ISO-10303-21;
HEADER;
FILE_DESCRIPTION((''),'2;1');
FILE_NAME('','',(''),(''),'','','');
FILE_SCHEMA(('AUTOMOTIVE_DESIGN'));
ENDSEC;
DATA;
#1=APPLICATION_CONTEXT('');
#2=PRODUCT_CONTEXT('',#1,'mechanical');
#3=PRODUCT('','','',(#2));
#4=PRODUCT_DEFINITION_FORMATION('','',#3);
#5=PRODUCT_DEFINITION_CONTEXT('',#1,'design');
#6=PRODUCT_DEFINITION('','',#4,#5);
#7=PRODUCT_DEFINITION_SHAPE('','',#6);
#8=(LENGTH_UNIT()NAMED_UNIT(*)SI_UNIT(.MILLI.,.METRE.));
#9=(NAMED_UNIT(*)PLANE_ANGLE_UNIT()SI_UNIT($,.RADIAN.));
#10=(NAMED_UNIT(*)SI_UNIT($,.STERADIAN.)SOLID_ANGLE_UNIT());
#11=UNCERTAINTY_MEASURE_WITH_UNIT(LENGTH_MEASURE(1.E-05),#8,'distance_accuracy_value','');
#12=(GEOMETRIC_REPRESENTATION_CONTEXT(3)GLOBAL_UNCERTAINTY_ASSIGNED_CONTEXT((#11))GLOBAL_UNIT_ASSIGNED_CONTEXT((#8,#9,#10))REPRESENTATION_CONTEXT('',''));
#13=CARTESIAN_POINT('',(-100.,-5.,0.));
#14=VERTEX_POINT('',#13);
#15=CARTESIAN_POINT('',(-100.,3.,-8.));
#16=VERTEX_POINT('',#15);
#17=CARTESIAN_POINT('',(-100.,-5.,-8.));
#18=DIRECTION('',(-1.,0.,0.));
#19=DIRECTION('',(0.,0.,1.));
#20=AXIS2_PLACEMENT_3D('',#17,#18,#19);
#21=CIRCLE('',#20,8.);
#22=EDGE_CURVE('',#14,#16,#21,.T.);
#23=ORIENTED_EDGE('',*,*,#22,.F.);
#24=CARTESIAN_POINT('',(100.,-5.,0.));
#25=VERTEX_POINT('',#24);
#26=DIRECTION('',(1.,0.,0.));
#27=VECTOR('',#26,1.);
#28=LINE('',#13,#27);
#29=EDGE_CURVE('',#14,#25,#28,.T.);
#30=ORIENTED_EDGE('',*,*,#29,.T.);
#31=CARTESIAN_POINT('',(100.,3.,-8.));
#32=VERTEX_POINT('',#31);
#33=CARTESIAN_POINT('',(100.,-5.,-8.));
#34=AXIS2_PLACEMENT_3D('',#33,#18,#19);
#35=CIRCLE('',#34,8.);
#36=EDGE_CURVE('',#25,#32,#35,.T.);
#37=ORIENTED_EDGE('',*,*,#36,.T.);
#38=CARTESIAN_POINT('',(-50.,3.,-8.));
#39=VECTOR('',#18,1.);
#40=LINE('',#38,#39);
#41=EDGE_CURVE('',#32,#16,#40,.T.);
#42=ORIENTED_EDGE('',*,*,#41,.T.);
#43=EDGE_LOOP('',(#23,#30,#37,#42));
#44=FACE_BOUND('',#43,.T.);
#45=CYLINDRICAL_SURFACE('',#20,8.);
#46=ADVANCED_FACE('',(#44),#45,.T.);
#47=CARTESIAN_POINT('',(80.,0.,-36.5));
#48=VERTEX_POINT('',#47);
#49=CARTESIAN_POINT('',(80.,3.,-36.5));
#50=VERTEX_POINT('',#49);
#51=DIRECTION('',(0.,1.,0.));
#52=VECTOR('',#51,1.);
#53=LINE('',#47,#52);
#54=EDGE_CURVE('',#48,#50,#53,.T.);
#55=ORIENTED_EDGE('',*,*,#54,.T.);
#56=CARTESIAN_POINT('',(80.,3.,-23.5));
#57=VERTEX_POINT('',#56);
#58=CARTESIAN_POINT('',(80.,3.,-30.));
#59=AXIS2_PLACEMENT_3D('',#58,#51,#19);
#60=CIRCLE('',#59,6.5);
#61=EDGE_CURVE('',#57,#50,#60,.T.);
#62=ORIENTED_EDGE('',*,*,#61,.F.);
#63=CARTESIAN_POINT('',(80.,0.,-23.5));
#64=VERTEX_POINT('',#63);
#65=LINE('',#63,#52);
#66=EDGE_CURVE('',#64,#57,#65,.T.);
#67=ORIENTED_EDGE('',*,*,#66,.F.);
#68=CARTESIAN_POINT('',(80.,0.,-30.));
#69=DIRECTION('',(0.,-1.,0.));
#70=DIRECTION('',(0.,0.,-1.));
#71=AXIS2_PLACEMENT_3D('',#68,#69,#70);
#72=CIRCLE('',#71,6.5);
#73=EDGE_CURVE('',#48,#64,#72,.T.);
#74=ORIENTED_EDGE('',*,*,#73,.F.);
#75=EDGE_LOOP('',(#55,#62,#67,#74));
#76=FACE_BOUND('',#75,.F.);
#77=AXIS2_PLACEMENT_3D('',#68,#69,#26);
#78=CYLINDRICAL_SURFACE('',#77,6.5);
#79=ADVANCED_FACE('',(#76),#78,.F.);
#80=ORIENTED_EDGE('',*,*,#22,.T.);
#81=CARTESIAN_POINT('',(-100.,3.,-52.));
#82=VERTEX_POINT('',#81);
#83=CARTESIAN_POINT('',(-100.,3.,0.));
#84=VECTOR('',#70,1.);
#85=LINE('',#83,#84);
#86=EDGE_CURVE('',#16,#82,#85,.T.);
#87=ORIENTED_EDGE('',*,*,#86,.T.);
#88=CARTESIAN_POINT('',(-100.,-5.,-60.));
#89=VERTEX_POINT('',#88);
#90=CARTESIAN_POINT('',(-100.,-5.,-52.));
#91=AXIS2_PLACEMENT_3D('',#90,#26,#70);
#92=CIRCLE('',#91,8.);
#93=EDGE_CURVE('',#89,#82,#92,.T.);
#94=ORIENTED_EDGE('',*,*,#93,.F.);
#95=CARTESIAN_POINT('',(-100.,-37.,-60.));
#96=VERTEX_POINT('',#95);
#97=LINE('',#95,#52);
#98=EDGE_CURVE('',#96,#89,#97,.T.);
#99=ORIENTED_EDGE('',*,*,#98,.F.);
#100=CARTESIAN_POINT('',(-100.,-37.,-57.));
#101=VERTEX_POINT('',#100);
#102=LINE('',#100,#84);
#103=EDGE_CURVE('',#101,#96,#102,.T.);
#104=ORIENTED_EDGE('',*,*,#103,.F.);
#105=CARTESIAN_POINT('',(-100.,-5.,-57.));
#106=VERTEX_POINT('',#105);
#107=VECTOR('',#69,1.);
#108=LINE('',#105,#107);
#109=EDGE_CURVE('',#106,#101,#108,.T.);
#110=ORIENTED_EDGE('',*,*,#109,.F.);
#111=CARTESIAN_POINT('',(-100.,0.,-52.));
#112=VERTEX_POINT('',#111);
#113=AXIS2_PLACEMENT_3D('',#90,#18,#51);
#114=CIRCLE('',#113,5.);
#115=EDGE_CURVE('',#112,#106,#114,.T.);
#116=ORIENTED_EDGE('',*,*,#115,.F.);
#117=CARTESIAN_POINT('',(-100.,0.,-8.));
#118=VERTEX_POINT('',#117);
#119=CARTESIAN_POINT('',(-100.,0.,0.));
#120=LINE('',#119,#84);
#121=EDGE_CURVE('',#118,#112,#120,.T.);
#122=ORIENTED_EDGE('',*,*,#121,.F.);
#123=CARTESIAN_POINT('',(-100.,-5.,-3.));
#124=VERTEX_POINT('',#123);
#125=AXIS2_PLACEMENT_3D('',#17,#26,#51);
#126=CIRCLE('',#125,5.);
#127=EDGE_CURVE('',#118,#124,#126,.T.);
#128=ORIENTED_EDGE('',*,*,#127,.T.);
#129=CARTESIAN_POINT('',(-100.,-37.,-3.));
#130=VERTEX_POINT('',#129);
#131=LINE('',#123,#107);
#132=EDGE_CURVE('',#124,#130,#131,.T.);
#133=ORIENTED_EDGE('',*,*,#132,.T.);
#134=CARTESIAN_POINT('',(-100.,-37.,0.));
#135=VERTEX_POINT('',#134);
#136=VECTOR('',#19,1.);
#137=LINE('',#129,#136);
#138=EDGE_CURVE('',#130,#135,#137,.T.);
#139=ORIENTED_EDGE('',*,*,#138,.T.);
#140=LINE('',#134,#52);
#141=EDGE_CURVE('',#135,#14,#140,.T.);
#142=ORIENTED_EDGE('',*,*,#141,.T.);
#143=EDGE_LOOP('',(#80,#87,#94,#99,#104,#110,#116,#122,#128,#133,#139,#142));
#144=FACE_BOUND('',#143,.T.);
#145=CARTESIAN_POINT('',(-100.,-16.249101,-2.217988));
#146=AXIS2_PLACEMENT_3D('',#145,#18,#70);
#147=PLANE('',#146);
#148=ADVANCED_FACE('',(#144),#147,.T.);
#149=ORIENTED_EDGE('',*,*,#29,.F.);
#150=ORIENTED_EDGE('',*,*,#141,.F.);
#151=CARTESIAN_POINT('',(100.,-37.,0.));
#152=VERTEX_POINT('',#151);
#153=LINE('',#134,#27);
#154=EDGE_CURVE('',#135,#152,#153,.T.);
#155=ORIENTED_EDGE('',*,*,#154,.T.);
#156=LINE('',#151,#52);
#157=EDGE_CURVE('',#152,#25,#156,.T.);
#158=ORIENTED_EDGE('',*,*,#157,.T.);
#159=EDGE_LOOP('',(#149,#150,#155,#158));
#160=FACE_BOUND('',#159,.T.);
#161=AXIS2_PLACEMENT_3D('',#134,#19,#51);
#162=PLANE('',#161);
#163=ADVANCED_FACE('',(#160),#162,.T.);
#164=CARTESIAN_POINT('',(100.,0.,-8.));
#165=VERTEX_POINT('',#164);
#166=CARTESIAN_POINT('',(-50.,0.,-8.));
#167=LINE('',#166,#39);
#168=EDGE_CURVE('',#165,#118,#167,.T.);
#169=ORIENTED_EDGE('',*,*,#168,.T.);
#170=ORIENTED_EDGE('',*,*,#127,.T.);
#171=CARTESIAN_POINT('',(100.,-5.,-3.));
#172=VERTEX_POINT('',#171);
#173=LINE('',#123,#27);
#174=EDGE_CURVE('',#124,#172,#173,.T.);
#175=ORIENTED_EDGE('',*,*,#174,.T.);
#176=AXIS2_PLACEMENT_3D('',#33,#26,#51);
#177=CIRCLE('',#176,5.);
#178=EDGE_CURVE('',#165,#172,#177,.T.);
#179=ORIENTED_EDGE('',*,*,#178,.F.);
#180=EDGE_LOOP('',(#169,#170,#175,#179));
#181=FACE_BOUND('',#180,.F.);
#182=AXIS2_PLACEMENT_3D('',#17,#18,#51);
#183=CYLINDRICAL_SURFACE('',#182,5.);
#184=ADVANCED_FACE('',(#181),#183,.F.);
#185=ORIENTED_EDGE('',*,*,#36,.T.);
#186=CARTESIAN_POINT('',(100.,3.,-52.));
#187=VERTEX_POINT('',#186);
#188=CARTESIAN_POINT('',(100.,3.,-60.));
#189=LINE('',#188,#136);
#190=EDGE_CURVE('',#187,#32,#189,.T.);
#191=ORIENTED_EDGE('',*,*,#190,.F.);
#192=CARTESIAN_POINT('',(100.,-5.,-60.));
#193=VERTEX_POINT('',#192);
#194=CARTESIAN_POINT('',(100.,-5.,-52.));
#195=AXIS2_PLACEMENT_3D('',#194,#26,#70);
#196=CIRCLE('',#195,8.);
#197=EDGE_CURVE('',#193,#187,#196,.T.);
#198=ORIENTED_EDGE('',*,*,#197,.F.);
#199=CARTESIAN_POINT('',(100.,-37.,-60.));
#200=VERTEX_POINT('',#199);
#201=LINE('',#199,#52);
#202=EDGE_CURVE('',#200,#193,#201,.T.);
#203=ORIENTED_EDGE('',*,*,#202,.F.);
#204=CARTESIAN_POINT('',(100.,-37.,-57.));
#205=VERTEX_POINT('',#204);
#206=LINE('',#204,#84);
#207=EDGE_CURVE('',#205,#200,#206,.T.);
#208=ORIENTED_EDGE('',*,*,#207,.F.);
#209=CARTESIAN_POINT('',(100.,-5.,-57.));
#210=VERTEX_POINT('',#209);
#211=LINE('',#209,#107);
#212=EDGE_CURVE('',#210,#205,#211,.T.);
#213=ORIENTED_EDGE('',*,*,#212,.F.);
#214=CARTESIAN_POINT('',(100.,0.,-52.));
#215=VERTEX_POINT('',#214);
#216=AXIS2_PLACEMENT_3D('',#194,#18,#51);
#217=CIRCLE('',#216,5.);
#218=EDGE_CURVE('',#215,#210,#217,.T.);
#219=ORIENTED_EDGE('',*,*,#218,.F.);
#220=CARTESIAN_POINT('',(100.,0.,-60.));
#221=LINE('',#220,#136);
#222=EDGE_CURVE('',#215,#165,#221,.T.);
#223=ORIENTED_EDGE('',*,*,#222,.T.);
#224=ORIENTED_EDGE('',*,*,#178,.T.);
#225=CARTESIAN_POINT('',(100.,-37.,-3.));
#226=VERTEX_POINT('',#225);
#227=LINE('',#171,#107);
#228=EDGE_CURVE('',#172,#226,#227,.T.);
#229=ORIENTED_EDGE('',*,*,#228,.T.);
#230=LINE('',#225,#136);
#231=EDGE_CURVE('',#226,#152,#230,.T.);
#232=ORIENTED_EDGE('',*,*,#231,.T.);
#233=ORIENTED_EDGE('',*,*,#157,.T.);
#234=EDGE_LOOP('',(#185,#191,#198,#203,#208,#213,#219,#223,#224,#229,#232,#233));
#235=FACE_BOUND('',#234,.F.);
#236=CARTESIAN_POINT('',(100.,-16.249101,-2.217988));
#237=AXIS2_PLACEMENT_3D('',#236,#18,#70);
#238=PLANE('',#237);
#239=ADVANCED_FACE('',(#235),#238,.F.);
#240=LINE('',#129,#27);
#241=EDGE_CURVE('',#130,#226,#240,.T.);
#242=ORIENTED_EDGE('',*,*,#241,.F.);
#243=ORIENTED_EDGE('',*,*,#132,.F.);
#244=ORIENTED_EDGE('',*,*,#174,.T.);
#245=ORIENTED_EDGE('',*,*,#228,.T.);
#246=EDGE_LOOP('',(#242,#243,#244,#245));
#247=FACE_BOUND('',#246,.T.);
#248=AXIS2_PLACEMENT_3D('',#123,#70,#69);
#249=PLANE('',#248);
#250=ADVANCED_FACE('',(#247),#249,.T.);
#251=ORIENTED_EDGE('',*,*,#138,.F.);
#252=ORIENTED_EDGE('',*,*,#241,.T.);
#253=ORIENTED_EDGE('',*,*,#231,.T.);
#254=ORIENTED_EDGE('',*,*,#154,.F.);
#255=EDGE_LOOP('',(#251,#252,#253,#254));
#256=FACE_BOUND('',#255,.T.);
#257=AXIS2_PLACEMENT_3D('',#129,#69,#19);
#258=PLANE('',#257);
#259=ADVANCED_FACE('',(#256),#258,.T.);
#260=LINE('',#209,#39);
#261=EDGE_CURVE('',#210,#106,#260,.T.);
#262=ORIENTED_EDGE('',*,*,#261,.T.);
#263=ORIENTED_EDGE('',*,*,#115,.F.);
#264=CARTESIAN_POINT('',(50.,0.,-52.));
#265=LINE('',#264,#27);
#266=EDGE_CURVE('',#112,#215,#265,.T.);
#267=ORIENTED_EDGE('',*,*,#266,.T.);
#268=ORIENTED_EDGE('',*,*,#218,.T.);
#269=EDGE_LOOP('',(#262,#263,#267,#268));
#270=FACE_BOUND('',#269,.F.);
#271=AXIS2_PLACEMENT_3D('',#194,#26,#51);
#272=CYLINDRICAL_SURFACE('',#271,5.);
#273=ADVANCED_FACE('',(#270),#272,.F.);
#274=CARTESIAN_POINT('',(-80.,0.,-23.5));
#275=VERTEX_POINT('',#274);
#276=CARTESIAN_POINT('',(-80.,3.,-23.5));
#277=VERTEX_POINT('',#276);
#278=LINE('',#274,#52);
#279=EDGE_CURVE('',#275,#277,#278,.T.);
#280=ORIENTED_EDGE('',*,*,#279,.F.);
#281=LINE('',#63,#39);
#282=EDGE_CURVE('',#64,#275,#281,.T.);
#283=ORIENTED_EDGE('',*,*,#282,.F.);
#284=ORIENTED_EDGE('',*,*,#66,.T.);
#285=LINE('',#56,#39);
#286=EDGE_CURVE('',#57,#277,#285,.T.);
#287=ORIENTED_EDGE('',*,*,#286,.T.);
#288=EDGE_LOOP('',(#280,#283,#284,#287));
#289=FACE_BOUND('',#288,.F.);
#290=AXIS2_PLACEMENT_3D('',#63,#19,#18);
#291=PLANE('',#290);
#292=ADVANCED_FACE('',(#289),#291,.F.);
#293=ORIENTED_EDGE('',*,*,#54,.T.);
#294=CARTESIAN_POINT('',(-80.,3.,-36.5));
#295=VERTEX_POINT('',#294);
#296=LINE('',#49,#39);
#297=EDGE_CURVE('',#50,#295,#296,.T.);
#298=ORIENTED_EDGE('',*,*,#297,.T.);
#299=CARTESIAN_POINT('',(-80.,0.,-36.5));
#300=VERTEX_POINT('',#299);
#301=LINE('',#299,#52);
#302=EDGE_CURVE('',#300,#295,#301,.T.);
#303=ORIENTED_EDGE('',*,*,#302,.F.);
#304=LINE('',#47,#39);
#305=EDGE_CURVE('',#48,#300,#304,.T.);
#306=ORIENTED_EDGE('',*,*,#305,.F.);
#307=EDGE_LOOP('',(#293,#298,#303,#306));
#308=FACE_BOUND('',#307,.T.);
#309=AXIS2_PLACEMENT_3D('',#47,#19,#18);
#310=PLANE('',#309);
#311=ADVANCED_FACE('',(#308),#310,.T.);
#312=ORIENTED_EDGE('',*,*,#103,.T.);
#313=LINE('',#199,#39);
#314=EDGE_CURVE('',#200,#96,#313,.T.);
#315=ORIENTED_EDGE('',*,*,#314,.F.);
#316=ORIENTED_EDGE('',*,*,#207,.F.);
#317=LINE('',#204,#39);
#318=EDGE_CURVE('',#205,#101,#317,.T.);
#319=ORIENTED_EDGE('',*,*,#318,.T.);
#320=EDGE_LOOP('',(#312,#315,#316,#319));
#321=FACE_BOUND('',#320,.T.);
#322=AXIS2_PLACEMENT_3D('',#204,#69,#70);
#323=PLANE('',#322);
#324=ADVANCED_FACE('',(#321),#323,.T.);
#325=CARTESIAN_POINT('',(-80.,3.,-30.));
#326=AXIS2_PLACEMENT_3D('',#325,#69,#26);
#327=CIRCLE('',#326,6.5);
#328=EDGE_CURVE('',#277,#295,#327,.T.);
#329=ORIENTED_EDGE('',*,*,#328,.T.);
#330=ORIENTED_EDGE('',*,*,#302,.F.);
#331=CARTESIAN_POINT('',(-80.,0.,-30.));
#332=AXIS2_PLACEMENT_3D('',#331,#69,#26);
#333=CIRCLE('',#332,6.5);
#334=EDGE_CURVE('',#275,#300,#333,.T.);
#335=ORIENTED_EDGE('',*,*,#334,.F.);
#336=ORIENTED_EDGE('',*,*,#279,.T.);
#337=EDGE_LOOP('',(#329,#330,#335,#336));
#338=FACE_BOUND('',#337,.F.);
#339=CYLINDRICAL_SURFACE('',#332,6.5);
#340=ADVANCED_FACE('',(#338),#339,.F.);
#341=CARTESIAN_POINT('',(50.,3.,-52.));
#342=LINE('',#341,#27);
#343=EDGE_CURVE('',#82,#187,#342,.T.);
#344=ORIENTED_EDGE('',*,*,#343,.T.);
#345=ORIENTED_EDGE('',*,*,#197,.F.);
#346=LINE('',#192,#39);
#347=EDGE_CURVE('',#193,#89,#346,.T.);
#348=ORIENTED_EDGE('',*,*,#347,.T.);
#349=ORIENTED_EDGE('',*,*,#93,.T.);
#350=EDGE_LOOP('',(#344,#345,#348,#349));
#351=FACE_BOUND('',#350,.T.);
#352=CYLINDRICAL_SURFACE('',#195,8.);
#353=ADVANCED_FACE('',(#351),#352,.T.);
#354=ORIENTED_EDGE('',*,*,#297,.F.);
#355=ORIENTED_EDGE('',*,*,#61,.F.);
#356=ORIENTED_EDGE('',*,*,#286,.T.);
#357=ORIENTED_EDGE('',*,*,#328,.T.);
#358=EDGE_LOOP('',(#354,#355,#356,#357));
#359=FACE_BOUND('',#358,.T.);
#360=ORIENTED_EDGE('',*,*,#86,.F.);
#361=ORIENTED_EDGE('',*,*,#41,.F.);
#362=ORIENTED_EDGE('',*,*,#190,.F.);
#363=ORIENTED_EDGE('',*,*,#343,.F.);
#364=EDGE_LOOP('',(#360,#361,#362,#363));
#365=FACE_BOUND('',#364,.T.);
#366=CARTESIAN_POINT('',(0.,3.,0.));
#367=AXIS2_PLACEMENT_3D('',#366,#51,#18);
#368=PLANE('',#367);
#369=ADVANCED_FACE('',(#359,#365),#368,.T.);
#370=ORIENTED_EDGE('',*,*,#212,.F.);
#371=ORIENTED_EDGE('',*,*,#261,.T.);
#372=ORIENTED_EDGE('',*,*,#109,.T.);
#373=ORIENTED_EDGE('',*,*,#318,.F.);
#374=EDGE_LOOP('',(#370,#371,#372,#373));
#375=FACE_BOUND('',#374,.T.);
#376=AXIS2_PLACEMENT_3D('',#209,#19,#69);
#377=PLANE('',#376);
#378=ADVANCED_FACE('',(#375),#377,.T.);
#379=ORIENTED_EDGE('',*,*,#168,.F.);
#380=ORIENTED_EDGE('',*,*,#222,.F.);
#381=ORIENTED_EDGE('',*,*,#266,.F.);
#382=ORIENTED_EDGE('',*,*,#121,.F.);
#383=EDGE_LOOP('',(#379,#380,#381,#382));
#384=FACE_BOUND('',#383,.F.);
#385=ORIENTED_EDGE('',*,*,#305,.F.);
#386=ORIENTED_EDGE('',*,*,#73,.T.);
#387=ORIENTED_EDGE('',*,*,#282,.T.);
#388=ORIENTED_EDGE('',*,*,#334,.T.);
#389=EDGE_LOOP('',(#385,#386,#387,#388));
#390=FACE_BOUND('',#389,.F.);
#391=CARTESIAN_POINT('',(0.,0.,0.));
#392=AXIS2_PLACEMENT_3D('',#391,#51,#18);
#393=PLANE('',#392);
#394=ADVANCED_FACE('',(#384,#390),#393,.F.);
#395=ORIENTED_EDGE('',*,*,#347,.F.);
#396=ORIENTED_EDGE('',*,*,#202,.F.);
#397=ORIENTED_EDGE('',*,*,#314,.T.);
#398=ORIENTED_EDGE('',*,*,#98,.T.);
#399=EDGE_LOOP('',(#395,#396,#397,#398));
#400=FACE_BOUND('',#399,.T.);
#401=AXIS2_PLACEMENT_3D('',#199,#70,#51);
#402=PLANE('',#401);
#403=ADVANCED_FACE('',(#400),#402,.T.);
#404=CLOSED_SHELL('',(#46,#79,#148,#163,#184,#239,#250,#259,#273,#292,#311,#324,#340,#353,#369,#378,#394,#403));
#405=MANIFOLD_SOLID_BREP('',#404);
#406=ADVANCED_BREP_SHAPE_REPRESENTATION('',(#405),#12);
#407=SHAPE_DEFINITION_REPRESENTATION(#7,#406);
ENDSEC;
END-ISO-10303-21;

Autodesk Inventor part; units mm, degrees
ref_plane "YZ Plane" through (0, 0, 0) normal (1, 0, 0) x (0, 1, 0)
ref_plane "XZ Plane" through (0, 0, 0) normal (0, 1, 0) x (-1, 0, 0)
ref_plane "XY Plane" through (0, 0, 0) normal (0, 0, 1) x (1, 0, 0)
sketch "Sketch4" plane through (0, 0, 0) normal (0, 1, 0) x (-1, 0, 0)
  line L0 (100, -60) -> (-100, -60)
  line L1 (-100, -60) -> (-100, 0)
  line L2 (-100, 0) -> (100, 0)
  line L3 (100, 0) -> (100, -60)
  point P0 (0, 0)
  point P1 (0, 0)
  dimension "d36" = 200
  dimension "d37" = 60
extrude "Plate2" add sketch "Sketch4" along normal blind 3
sketch "Sketch5" plane through (0, 0, 0) normal (0, -1, 0) x (1, 0, 0)
  circle A0 centre (-80, -30) radius 6.5
  circle A1 centre (80, -30) radius 6.5
  line L0 (0, 0) -> (0, -60) construction
  line L1 (100, -60) -> (-100, -60) construction
  line L2 (100, 0) -> (-100, 0) projected
  line L3 (80, -23.5) -> (-80, -23.5)
  line L4 (80, -36.5) -> (-80, -36.5)
  dimension "d39" = 160
  dimension "d40" = 30
  dimension "d41" = 13
  dimension "d55" = 60
extrude "Cut1" cut sketch "Sketch5" against normal blind 3
sketch "Sketch6" plane through (-100, 3, -3) normal (0, 0, 1) x (1, 0, 0)
  line L0 (200, 0) -> (0, 0)
  line L1 (0, 0) -> (0, -40)
  line L2 (0, -40) -> (200, -40)
  line L3 (200, -40) -> (200, 0)
edge flange "Flange1" height 40 angle 90 thickness 3 bend radius 5 thickness toward (0, 0, 1) relief round relief width 3 relief depth 1.5 corner gap 5 corner form 0 edges at (0, 0, 0) (0, 0, -60) wall of the first edge with corners at (100, 3, -3) (-100, 3, -3) (-100, -37, -3) (100, -37, -3)
bend "Bend1"
corner "Corner1"
equation "\"d40\" = 0.5 * d55"
equation "\"d42\" = Thickness"
equation "\"d38\" = Thickness"
equation "\"d44\" = BendReliefWidth"
equation "\"d45\" = BendReliefDepth"
equation "\"d46\" = MinimumRemnant"
equation "\"d47\" = TransitionRadius"
equation "\"d50\" = BendRadius"
equation "\"d51\" = CornerReliefSize"
equation "\"d52\" = GapSize"
equation "\"d53\" = JacobiRadiusSize"
equation "\"BendReliefWidth\" = Thickness"
equation "\"BendReliefDepth\" = 0.5 * Thickness"
equation "\"CornerReliefSize\" = 4 * Thickness"
equation "\"MinimumRemnant\" = 2 * Thickness"
equation "\"TransitionRadius\" = BendRadius"
equation "\"JacobiRadiusSize\" = BendRadius"
equation "\"GapSize\" = Thickness"
equation "\"Thickness\" = 3"
equation "\"BendRadius\" = 5"
properties part number "NDM-VOS 715 flange" material "Stainless Steel"
